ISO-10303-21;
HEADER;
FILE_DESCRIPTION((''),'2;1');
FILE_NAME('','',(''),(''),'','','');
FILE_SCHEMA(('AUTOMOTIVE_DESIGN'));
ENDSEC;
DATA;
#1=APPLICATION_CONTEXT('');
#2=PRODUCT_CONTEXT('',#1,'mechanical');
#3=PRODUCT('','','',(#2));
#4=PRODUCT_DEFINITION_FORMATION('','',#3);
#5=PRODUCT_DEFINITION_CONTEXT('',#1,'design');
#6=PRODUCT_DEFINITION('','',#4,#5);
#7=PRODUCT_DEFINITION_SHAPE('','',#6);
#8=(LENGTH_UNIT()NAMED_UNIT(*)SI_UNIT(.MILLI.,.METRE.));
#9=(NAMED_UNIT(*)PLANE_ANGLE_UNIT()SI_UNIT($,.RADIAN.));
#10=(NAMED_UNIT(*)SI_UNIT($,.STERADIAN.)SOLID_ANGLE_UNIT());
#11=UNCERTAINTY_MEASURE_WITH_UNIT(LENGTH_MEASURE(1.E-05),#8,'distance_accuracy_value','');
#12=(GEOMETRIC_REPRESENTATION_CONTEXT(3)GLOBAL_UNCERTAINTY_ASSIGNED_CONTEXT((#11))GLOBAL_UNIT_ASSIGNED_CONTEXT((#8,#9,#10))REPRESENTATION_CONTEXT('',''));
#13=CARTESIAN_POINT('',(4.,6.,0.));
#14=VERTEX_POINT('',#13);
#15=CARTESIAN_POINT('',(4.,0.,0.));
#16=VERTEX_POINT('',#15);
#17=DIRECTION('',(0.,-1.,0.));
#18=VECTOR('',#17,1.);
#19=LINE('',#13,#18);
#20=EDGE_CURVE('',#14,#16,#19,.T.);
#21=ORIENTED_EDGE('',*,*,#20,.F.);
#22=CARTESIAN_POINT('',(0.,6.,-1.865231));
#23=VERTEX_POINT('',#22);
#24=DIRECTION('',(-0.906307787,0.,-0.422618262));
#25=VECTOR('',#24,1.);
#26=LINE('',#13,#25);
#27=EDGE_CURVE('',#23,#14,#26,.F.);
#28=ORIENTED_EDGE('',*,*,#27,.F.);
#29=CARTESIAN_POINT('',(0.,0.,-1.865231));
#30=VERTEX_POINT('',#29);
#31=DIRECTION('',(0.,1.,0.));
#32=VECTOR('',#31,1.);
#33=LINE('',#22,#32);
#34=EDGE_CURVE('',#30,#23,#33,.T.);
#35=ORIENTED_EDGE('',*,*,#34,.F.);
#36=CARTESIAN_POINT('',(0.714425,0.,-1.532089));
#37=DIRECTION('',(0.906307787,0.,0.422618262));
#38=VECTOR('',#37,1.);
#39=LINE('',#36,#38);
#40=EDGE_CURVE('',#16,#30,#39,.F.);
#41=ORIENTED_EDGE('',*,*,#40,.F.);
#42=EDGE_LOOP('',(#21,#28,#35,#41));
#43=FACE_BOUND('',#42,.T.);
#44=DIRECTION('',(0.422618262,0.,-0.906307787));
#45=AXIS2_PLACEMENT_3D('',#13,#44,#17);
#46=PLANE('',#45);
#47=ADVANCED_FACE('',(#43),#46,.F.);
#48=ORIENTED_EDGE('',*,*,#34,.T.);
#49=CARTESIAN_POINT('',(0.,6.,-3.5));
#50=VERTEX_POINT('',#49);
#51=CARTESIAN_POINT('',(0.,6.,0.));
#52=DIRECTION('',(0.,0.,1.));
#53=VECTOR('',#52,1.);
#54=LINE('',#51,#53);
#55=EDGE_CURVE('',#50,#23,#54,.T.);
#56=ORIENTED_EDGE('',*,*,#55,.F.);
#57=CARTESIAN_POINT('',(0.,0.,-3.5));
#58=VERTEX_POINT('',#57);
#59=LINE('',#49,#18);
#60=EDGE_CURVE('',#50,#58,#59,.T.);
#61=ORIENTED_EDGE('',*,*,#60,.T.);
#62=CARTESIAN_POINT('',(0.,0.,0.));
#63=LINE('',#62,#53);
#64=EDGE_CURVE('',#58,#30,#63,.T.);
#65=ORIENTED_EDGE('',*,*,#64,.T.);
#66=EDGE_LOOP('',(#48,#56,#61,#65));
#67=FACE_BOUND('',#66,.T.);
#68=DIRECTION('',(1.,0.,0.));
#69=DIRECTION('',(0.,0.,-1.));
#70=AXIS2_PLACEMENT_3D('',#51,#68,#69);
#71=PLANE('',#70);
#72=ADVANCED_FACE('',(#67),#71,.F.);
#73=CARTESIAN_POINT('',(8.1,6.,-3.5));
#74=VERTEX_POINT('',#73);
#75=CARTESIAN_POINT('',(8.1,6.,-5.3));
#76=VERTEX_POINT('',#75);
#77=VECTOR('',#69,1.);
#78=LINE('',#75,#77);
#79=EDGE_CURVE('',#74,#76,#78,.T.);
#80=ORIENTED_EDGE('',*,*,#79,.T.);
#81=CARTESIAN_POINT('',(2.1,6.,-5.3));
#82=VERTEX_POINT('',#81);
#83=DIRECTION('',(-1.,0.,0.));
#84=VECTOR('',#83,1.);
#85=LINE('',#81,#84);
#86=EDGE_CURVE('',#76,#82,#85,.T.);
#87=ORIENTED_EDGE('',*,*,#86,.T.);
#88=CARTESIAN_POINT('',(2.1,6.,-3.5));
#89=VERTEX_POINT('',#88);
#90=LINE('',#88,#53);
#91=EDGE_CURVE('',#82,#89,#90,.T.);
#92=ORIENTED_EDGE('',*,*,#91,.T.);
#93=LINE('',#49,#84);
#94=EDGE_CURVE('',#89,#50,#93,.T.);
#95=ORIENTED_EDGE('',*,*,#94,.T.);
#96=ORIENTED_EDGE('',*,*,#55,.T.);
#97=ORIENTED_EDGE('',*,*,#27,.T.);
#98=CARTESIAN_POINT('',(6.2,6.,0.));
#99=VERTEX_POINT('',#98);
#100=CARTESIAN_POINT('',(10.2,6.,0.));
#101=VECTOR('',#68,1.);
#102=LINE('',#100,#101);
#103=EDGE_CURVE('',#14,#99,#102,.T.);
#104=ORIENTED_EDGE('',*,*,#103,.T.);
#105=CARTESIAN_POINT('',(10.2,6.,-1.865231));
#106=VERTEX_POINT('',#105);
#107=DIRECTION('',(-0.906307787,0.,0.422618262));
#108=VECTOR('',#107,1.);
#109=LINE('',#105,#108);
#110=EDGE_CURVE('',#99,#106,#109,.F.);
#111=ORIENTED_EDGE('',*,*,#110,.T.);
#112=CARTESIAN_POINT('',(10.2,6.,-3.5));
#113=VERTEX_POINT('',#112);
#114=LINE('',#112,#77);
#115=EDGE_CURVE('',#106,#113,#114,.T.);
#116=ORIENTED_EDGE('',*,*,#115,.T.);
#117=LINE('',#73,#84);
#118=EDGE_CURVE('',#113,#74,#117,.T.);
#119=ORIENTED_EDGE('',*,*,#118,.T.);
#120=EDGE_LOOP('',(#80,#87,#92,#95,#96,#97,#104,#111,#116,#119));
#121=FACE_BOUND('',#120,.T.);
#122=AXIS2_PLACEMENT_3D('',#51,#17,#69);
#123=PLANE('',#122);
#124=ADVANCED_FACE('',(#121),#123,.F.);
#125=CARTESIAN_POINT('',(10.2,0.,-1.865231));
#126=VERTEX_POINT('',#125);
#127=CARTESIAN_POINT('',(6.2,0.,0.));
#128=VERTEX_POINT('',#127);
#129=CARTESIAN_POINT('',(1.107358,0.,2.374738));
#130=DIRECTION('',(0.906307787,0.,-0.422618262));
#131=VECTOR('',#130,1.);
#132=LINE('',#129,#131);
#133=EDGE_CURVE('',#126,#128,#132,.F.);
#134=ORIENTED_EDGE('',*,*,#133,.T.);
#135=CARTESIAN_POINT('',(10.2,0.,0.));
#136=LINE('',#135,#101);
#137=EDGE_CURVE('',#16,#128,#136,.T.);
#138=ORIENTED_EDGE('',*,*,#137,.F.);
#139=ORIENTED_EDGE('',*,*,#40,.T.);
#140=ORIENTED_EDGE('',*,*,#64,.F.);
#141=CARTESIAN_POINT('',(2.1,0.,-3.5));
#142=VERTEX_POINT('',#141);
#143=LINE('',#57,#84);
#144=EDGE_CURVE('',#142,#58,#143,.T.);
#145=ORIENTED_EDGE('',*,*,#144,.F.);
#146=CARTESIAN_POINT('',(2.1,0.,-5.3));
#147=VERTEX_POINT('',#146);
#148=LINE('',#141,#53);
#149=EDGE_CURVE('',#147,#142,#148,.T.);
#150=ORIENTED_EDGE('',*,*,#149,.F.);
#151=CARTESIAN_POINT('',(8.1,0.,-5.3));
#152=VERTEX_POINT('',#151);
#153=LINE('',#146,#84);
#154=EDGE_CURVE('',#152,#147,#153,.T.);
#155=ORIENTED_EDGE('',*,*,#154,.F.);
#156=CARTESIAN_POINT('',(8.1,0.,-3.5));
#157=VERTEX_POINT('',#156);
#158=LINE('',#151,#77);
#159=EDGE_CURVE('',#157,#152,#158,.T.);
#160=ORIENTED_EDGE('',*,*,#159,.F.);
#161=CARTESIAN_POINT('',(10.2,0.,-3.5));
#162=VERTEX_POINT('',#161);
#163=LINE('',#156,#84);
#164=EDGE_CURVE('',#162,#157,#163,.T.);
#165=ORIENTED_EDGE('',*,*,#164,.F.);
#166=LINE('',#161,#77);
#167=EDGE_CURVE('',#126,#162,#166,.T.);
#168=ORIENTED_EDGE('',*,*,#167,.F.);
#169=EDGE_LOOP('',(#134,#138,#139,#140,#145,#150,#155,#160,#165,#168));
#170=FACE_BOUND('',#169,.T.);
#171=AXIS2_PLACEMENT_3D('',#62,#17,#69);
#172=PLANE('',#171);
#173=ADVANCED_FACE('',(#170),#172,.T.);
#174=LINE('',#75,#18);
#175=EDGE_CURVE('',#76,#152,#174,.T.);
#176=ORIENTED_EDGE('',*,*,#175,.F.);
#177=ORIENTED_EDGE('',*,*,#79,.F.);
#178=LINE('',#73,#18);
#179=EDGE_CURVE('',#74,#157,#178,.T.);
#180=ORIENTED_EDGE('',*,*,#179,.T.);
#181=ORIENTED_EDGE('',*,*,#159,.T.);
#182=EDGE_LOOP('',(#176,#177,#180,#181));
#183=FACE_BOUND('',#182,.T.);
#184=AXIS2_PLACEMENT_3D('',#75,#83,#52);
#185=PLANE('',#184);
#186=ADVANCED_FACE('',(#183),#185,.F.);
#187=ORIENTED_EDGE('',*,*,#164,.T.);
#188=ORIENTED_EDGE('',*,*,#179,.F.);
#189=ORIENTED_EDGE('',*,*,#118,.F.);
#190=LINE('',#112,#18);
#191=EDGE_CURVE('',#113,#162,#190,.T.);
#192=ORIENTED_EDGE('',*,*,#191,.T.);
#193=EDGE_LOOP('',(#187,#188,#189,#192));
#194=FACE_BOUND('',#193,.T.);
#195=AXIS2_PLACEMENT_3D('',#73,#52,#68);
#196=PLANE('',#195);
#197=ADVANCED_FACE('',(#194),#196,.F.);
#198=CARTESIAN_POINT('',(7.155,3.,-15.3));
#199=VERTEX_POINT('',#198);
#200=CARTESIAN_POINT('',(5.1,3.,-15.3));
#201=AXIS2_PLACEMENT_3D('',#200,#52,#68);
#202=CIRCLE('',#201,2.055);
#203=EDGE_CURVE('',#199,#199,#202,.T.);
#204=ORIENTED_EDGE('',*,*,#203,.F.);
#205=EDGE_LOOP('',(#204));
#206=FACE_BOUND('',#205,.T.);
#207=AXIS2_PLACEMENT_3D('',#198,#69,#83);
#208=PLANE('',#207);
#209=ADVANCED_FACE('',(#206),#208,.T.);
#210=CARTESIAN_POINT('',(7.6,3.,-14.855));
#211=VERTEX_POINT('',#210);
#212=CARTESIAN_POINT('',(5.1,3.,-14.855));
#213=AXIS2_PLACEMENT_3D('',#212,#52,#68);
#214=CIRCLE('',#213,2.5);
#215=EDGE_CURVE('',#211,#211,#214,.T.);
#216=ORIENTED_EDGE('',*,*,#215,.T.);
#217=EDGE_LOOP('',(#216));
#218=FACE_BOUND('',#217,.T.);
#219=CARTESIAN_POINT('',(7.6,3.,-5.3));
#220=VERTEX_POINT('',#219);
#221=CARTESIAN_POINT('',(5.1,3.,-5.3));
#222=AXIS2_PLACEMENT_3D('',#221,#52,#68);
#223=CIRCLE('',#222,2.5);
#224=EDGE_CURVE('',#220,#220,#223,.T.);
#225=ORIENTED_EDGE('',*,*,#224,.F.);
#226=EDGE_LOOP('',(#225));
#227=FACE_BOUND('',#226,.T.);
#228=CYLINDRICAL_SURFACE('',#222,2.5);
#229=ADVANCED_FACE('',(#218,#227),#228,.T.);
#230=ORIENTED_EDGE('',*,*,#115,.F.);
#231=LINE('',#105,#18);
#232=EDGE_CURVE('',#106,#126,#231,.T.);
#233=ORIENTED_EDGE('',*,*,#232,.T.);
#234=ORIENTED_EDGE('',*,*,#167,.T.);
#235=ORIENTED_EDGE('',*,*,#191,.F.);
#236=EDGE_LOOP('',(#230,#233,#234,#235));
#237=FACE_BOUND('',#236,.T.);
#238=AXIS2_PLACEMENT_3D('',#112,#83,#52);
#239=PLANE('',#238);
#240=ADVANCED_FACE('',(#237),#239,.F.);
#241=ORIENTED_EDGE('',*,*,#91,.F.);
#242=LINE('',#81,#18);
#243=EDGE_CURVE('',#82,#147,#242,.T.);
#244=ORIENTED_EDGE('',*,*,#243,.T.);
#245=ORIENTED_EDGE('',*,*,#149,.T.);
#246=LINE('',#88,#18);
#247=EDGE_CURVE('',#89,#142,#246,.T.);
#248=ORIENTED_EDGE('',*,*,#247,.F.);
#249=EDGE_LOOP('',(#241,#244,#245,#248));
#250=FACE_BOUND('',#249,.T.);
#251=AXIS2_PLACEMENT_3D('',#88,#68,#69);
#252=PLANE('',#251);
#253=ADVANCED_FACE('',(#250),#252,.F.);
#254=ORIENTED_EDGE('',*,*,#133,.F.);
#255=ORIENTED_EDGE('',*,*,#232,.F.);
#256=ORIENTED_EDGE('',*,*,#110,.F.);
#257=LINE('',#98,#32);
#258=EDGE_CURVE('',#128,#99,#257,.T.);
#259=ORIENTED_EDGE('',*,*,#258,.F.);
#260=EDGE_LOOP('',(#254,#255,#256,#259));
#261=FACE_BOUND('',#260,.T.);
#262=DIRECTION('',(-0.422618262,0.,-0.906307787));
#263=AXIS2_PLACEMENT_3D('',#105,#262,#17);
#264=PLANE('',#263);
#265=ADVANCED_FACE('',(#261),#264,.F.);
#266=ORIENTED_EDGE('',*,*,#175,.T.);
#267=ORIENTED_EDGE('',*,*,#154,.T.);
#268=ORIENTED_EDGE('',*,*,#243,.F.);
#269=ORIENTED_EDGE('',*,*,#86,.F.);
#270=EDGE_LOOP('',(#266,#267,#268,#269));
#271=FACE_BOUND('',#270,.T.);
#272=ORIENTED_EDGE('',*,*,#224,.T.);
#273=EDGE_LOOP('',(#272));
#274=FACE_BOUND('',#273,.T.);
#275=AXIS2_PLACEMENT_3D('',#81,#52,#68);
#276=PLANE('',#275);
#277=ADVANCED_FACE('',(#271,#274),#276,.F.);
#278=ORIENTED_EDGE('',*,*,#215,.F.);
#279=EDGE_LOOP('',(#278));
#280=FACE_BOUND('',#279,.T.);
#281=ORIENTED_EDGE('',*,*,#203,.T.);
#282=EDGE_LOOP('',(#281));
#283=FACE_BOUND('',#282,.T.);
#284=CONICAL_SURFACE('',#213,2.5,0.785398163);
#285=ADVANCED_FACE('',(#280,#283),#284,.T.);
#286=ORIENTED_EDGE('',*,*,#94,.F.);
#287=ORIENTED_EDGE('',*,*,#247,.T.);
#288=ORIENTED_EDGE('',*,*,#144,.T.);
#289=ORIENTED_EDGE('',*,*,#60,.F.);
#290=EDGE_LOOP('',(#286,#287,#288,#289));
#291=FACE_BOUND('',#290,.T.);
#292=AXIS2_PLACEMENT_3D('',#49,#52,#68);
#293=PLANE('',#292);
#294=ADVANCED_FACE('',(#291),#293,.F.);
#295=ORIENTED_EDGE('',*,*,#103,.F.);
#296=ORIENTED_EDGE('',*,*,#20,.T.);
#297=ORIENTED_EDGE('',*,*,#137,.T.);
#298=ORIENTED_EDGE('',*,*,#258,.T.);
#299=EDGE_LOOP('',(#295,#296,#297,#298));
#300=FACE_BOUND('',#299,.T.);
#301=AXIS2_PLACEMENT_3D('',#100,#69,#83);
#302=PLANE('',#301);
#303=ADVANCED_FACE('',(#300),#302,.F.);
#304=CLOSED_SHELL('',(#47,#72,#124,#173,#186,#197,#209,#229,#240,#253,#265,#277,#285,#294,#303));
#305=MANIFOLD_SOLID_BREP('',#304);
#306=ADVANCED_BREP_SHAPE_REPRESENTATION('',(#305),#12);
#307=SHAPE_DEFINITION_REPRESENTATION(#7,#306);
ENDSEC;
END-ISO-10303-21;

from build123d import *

# Parameters (mm, degrees)
BOSS_EXTRUDE1_DEPTH = 6
CHAMFER1_SIZE       = 4
CHAMFER1_SIZE2      = 1.865230633


# Read off the part's stored shape, not the designer's step: M5x0.8 Machine Threads Stud1
with BuildPart() as part:
    # Sketch1 → Boss-Extrude1 (new body)
    with BuildSketch(Plane(origin=(0, 0, 0), x_dir=(1, 0, 0), z_dir=(0, 1, 0))):
        Polygon((0, 0), (0, 3.5), (2.1, 3.5), (2.1, 5.3), (8.1, 5.3), (8.1, 3.5), (10.2, 3.5), (10.2, 0), align=None)
    extrude(amount=BOSS_EXTRUDE1_DEPTH)

    # M5x0.8 Machine Threads Stud1 outline → M5x0.8 Machine Threads Stud1 (revolve)
    with BuildSketch(Plane(origin=(5.1, 3, 0), x_dir=(1, 0, 0), z_dir=(0, -1, 0))):
        Polygon((0, -5.3), (0, -15.3), (2.055, -15.3), (2.5, -14.855), (2.5, -5.3), align=None)
    revolve(axis=Axis((5.1, 3, 0), (0, 0, 1)))

    # Chamfer1
    chamfer1_edges = [part.edges().sort_by_distance(p)[0] for p in [
        (0, 3, 0),
        (10.2, 3, 0),
    ]]
    chamfer1_side = [part.faces().sort_by_distance(p)[0] for p in [
        (5.1, 3, 0),
    ]]
    chamfer(chamfer1_edges, length=CHAMFER1_SIZE, length2=CHAMFER1_SIZE2, reference=chamfer1_side[0])


solid = part.part
